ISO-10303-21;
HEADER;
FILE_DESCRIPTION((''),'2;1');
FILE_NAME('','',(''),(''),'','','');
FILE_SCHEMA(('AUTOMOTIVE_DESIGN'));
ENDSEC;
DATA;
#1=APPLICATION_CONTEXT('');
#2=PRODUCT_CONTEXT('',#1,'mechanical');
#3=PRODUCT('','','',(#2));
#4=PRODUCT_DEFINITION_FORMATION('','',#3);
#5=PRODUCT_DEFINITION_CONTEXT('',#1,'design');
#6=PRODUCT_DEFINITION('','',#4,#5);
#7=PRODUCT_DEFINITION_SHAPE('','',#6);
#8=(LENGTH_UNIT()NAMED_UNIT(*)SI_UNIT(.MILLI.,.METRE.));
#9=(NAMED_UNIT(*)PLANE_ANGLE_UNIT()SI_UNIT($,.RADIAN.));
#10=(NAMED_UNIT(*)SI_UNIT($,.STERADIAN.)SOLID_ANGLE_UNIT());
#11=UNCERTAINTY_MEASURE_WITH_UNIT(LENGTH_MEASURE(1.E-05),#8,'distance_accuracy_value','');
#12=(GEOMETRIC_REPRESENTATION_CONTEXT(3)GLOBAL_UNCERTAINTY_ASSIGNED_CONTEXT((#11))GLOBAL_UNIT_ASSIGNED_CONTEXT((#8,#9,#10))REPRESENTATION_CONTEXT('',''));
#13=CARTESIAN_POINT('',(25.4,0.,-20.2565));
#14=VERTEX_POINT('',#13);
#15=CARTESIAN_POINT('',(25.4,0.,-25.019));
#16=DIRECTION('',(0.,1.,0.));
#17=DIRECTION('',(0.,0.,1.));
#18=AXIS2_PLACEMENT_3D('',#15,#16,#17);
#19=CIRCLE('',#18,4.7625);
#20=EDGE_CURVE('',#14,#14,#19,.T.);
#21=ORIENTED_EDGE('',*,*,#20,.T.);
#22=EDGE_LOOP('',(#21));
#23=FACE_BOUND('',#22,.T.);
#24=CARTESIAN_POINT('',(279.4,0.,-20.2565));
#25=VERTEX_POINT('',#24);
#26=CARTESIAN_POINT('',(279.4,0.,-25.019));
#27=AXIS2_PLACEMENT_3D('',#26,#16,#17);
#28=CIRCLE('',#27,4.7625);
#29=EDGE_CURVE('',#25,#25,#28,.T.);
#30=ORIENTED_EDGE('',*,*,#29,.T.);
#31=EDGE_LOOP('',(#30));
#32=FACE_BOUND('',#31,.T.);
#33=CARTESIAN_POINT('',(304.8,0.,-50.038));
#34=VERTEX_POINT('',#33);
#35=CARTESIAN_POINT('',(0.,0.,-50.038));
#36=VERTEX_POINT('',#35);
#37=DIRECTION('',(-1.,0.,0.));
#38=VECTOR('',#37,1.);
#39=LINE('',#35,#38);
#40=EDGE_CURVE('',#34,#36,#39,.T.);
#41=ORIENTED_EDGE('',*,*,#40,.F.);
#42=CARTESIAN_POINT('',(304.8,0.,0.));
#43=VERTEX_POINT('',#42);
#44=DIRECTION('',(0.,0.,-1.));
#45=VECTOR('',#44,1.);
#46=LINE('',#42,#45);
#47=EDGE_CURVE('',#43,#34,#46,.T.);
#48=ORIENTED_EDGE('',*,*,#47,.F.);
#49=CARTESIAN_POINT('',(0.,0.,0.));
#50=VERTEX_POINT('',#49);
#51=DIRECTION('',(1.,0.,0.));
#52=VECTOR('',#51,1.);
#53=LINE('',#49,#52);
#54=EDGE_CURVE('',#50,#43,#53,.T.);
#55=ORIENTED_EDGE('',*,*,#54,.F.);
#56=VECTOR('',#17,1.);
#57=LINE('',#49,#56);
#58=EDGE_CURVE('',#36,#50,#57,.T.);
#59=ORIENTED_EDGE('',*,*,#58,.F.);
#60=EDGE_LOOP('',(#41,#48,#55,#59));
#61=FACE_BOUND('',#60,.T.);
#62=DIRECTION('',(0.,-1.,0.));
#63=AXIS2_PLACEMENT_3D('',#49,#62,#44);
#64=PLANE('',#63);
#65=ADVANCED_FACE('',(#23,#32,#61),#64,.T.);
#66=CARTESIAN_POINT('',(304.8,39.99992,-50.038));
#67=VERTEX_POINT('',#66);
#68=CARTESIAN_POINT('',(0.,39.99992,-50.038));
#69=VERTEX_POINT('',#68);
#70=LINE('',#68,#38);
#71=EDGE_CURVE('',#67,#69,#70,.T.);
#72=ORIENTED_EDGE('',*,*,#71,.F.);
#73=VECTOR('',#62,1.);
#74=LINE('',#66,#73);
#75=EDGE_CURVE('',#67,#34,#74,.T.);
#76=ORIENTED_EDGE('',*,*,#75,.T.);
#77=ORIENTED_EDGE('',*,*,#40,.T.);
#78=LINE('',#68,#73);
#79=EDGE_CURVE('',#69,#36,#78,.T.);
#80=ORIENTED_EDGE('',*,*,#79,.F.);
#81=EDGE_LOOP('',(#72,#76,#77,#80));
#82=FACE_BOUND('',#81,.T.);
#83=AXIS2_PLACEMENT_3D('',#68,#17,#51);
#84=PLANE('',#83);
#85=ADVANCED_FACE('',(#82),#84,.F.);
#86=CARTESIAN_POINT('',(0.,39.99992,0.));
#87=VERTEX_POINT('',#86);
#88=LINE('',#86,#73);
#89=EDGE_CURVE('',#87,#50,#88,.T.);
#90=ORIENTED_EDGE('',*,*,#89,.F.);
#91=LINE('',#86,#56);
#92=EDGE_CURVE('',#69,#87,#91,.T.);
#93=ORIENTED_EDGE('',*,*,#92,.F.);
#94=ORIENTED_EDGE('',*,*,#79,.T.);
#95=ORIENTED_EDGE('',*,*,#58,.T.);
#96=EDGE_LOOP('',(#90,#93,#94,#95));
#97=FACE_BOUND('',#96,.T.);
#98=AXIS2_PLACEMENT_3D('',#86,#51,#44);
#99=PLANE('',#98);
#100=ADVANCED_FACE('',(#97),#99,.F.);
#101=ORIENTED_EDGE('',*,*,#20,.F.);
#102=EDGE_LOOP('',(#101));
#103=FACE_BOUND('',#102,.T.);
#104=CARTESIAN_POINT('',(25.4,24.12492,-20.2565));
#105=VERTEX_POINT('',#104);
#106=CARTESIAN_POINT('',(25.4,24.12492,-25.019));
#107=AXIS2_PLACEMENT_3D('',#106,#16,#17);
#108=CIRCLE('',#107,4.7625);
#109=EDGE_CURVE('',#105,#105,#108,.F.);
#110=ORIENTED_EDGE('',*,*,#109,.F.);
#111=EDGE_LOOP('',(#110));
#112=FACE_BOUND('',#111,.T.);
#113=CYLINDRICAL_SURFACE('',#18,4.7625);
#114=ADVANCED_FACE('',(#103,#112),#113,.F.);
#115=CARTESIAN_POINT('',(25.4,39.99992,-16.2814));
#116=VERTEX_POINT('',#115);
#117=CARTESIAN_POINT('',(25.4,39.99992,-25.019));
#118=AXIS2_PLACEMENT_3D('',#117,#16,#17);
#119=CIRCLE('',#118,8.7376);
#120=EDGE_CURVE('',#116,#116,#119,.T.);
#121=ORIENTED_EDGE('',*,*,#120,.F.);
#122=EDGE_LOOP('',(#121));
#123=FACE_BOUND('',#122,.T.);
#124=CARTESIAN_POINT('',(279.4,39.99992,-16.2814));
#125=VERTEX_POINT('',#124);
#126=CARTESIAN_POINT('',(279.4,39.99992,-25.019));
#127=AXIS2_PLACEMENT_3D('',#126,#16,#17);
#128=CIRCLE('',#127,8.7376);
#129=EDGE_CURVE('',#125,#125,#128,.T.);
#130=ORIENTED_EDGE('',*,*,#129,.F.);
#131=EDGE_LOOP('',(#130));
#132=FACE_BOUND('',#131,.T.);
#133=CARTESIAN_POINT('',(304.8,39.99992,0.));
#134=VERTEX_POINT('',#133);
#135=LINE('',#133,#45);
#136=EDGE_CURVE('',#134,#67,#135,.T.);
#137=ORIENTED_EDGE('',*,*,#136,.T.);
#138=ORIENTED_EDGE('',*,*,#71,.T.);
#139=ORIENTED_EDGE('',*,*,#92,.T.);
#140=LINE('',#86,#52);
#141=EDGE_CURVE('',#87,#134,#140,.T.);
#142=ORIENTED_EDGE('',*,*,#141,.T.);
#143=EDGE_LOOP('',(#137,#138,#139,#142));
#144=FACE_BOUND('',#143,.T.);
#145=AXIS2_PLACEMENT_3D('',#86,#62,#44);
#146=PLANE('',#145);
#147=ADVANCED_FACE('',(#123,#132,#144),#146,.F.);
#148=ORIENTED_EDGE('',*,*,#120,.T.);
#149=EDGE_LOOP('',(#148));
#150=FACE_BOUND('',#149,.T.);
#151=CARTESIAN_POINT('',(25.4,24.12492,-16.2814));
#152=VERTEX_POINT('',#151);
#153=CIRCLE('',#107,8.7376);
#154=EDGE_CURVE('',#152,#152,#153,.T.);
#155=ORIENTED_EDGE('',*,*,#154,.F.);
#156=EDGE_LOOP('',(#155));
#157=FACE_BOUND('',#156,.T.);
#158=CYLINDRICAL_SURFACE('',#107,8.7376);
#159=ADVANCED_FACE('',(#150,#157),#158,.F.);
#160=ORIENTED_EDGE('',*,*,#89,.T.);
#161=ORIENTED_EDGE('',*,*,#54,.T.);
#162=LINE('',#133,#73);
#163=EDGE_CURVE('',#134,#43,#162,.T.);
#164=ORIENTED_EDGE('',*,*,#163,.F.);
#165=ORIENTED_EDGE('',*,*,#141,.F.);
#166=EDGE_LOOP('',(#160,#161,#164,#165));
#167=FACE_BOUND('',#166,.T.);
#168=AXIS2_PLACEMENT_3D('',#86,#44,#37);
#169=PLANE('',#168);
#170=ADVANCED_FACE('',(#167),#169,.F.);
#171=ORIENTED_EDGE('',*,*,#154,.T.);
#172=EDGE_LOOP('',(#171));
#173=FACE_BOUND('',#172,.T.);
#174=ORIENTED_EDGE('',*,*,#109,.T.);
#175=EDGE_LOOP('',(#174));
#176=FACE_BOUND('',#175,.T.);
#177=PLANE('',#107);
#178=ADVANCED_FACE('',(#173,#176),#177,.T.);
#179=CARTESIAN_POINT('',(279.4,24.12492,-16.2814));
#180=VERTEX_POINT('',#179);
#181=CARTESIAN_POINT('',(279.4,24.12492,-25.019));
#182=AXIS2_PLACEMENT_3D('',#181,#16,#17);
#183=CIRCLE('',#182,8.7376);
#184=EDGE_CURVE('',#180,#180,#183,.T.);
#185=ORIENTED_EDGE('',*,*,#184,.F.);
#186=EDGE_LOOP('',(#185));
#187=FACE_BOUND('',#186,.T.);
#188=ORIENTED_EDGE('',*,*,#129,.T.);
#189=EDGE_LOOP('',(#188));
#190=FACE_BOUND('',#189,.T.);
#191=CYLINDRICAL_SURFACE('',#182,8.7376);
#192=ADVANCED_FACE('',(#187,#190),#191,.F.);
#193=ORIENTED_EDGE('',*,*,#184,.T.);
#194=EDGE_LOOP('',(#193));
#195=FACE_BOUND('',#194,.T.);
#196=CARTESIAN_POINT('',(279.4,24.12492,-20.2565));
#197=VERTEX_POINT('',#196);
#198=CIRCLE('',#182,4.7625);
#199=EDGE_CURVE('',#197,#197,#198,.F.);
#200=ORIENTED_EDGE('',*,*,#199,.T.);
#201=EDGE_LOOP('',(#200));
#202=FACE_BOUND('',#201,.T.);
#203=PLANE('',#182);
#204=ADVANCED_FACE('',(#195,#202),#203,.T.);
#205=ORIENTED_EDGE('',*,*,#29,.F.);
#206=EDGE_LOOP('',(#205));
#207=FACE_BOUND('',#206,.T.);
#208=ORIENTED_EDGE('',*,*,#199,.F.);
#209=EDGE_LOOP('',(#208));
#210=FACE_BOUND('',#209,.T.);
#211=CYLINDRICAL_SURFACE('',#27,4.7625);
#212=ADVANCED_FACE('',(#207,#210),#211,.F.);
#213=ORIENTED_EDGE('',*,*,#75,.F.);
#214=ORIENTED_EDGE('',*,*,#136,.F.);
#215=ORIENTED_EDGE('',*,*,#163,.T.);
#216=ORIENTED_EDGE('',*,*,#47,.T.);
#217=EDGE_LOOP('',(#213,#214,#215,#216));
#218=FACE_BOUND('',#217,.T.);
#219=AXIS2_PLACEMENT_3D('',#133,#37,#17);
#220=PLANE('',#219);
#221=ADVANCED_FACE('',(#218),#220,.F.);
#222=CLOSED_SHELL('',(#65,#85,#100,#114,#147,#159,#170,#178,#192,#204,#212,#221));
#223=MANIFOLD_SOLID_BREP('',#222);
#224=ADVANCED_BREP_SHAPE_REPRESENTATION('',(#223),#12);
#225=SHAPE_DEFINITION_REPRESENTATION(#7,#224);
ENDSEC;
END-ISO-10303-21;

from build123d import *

# Parameters (mm, degrees)
BOSS_EXTRUDE2_OUTLINE_W = 304.8
BOSS_EXTRUDE2_OUTLINE_H = 50.038
BOSS_EXTRUDE2_DEPTH     = 39.99992
SKETCH3_R               = 4.7625
CUT_EXTRUDE1_DEPTH      = 312.459202856
SKETCH4_R               = 8.7376
CUT_EXTRUDE2_DEPTH      = 15.875


# Read off the part's stored shape, not the designer's step: Boss-Extrude2
with BuildPart() as part:
    # Boss-Extrude2 outline → Boss-Extrude2 (new body)
    with BuildSketch(Plane(origin=(0, 0, 0), x_dir=(1, 0, 0), z_dir=(0, 1, 0))):
        with Locations((152.4, 25.019)):
            Rectangle(BOSS_EXTRUDE2_OUTLINE_W, BOSS_EXTRUDE2_OUTLINE_H)
    extrude(amount=BOSS_EXTRUDE2_DEPTH)

    # Sketch3 → Cut-Extrude1 (cut, through all)
    with BuildSketch(Plane(origin=(0, 39.99992, 0), x_dir=(1, 0, 0), z_dir=(0, 1, 0))):
        with Locations(Location((279.4, 25.019, 0), (0, 0, 270))):
            Circle(SKETCH3_R)
        with Locations(Location((25.4, 25.019, 0), (0, 0, 270))):
            Circle(SKETCH3_R)
    extrude(amount=-CUT_EXTRUDE1_DEPTH, mode=Mode.SUBTRACT)

    # Sketch4 → Cut-Extrude2 (cut)
    with BuildSketch(Plane(origin=(0, 39.99992, 0), x_dir=(1, 0, 0), z_dir=(0, 1, 0))):
        with Locations(Location((279.4, 25.019, 0), (0, 0, 270))):
            Circle(SKETCH4_R)
        with Locations(Location((25.4, 25.019, 0), (0, 0, 270))):
            Circle(SKETCH4_R)
    extrude(amount=-CUT_EXTRUDE2_DEPTH, mode=Mode.SUBTRACT)


solid = part.part
